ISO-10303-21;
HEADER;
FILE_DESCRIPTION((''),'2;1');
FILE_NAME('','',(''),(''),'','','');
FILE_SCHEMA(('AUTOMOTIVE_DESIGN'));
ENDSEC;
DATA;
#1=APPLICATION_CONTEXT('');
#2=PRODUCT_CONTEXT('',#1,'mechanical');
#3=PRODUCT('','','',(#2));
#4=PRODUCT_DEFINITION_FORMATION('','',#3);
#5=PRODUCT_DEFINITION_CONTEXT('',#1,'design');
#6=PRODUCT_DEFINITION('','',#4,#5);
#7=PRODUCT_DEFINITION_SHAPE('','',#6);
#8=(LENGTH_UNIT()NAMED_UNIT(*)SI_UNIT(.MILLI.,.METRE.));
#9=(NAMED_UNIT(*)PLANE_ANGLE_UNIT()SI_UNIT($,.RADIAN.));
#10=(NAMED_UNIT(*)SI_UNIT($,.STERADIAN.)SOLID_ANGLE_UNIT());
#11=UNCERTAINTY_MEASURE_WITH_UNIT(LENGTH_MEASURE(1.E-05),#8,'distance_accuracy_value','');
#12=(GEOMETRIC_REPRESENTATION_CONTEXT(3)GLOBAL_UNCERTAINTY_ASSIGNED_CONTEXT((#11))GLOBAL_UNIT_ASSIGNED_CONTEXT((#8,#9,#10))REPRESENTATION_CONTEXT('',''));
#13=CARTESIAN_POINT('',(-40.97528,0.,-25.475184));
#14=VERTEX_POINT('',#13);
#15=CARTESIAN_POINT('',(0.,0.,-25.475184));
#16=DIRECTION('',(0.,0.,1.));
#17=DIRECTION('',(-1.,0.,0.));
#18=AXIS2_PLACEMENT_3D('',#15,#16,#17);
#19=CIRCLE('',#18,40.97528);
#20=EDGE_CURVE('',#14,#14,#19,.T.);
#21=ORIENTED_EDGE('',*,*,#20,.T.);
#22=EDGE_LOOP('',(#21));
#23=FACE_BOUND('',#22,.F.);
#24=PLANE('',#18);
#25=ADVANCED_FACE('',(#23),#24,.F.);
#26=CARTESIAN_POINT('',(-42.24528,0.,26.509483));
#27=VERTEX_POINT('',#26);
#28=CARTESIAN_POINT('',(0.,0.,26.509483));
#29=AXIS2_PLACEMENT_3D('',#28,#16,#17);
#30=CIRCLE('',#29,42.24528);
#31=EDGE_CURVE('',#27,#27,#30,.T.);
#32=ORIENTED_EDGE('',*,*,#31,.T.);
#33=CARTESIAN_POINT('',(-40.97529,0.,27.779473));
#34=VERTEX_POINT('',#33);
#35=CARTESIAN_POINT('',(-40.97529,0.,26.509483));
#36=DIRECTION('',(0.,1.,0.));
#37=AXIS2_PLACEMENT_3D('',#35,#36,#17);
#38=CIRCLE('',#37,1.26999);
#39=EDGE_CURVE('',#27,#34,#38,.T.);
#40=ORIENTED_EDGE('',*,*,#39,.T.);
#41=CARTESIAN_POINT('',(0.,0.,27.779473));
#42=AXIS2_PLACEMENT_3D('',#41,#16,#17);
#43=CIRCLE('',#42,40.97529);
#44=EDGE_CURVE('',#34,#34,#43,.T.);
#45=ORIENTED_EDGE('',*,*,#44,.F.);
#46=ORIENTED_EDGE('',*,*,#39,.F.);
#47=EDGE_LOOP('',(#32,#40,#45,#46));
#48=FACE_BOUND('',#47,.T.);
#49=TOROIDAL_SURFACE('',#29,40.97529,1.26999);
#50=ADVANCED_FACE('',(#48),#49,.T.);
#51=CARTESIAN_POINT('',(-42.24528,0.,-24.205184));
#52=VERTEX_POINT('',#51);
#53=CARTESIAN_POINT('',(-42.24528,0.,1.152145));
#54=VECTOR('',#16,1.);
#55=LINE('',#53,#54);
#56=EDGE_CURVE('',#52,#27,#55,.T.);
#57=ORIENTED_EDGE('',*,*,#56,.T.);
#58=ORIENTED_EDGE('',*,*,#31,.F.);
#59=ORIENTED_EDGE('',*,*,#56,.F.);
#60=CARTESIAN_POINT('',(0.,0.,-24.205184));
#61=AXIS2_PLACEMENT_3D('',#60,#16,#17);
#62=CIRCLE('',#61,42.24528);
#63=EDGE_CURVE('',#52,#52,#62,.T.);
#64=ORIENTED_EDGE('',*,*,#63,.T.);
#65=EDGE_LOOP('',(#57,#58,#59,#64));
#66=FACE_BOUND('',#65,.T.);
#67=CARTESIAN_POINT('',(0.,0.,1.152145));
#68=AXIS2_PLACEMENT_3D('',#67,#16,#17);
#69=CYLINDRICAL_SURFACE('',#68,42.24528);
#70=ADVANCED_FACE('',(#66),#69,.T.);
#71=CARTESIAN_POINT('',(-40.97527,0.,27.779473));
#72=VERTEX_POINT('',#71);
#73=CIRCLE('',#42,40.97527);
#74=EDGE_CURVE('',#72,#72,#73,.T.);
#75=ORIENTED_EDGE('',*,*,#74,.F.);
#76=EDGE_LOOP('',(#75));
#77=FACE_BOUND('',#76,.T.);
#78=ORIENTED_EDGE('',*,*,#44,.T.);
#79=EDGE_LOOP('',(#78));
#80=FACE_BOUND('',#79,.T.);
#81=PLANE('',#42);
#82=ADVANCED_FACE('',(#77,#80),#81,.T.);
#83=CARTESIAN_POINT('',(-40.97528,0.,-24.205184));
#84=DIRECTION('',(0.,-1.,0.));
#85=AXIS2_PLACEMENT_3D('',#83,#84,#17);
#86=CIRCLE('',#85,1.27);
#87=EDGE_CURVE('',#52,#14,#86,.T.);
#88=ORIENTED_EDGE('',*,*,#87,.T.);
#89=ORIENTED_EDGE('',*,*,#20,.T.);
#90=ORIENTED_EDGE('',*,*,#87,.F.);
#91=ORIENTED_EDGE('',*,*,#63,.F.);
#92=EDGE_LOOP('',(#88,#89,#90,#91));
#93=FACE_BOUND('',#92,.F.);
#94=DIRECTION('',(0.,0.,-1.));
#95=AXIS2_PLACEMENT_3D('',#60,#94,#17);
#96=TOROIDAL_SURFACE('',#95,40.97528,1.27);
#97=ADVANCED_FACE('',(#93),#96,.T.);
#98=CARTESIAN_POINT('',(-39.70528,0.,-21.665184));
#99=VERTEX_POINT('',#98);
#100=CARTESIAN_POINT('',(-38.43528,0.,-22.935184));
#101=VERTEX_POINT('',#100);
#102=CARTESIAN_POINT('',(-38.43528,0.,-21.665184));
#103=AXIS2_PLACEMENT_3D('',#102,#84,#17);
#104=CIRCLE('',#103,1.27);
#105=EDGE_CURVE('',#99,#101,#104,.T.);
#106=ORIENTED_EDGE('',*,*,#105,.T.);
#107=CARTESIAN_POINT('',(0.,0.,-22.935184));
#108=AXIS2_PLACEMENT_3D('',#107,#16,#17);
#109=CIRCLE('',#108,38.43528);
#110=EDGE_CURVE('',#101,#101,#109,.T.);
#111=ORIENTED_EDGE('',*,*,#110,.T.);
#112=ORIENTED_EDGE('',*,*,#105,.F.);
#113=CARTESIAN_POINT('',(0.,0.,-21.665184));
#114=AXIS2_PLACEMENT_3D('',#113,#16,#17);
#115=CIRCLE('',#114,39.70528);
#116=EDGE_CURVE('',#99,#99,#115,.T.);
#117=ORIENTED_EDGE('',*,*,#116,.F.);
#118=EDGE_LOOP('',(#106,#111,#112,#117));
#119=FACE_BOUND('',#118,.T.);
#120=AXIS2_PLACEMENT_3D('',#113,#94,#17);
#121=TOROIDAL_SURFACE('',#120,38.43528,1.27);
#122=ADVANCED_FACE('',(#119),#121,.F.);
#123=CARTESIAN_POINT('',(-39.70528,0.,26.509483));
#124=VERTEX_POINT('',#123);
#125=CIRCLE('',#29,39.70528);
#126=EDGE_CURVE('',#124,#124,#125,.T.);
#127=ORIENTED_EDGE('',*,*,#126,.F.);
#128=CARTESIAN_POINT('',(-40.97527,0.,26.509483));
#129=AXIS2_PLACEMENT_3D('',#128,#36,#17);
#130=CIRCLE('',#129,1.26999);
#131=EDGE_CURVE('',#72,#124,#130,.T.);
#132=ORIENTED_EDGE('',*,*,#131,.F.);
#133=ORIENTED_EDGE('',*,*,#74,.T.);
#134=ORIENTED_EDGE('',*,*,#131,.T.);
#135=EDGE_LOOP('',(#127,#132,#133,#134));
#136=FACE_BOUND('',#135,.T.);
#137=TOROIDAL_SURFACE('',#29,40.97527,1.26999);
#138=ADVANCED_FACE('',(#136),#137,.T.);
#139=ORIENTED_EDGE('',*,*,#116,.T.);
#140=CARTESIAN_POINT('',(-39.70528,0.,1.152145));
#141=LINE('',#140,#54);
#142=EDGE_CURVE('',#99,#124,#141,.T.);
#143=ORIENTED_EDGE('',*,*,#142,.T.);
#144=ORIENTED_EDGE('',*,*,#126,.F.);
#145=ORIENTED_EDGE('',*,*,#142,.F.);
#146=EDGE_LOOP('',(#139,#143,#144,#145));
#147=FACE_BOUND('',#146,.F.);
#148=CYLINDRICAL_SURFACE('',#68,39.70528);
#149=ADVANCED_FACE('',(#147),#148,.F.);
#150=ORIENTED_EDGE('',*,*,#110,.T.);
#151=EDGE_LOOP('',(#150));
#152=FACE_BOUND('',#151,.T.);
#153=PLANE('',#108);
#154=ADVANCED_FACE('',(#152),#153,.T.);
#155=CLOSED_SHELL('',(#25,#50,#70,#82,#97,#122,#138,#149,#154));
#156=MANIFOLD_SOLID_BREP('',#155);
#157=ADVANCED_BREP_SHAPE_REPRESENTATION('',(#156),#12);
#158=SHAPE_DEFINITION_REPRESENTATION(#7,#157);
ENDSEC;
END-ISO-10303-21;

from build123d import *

# Parameters (mm, degrees)
F0_W = 42.2452799976
F0_H = 53.2546564937
F2_T = -2.54
F3_R = 1.26999
F4_R = 1.27


# Not quite as in the source:
# - a fillet or chamfer is up to 0.001 mm smaller than in the source, because OpenCascade refuses the exact size


with BuildPart() as f1:
    # F0 (on Front) → F1 (revolve)
    with BuildSketch(Plane.XZ):
        with Locations((-21.1226399988, 1.152144745)):
            Rectangle(F0_W, F0_H)
    revolve(axis=Axis((0, 0, 1.152144745), (0, 0, 1)))

    # F2
    f2_openings = [f1.faces().sort_by_distance(p)[0] for p in [
        (0, 0, 27.779473),
    ]]
    offset(amount=F2_T, openings=f2_openings)

    # F3 (radius 1.27 in the source; OpenCascade refuses exactly that, so slightly less here)
    f3_edges = [f1.edges().sort_by_distance(p)[0] for p in [
        (39.70528, 0, 27.779473),
        (42.24528, 0, 27.779473),
    ]]
    fillet(f3_edges, radius=F3_R)

    # F4
    f4_edges = [f1.edges().sort_by_distance(p)[0] for p in [
        (39.70528, 0, -22.935184),
        (42.24528, 0, -25.475184),
    ]]
    fillet(f4_edges, radius=F4_R)


solid = f1.part
